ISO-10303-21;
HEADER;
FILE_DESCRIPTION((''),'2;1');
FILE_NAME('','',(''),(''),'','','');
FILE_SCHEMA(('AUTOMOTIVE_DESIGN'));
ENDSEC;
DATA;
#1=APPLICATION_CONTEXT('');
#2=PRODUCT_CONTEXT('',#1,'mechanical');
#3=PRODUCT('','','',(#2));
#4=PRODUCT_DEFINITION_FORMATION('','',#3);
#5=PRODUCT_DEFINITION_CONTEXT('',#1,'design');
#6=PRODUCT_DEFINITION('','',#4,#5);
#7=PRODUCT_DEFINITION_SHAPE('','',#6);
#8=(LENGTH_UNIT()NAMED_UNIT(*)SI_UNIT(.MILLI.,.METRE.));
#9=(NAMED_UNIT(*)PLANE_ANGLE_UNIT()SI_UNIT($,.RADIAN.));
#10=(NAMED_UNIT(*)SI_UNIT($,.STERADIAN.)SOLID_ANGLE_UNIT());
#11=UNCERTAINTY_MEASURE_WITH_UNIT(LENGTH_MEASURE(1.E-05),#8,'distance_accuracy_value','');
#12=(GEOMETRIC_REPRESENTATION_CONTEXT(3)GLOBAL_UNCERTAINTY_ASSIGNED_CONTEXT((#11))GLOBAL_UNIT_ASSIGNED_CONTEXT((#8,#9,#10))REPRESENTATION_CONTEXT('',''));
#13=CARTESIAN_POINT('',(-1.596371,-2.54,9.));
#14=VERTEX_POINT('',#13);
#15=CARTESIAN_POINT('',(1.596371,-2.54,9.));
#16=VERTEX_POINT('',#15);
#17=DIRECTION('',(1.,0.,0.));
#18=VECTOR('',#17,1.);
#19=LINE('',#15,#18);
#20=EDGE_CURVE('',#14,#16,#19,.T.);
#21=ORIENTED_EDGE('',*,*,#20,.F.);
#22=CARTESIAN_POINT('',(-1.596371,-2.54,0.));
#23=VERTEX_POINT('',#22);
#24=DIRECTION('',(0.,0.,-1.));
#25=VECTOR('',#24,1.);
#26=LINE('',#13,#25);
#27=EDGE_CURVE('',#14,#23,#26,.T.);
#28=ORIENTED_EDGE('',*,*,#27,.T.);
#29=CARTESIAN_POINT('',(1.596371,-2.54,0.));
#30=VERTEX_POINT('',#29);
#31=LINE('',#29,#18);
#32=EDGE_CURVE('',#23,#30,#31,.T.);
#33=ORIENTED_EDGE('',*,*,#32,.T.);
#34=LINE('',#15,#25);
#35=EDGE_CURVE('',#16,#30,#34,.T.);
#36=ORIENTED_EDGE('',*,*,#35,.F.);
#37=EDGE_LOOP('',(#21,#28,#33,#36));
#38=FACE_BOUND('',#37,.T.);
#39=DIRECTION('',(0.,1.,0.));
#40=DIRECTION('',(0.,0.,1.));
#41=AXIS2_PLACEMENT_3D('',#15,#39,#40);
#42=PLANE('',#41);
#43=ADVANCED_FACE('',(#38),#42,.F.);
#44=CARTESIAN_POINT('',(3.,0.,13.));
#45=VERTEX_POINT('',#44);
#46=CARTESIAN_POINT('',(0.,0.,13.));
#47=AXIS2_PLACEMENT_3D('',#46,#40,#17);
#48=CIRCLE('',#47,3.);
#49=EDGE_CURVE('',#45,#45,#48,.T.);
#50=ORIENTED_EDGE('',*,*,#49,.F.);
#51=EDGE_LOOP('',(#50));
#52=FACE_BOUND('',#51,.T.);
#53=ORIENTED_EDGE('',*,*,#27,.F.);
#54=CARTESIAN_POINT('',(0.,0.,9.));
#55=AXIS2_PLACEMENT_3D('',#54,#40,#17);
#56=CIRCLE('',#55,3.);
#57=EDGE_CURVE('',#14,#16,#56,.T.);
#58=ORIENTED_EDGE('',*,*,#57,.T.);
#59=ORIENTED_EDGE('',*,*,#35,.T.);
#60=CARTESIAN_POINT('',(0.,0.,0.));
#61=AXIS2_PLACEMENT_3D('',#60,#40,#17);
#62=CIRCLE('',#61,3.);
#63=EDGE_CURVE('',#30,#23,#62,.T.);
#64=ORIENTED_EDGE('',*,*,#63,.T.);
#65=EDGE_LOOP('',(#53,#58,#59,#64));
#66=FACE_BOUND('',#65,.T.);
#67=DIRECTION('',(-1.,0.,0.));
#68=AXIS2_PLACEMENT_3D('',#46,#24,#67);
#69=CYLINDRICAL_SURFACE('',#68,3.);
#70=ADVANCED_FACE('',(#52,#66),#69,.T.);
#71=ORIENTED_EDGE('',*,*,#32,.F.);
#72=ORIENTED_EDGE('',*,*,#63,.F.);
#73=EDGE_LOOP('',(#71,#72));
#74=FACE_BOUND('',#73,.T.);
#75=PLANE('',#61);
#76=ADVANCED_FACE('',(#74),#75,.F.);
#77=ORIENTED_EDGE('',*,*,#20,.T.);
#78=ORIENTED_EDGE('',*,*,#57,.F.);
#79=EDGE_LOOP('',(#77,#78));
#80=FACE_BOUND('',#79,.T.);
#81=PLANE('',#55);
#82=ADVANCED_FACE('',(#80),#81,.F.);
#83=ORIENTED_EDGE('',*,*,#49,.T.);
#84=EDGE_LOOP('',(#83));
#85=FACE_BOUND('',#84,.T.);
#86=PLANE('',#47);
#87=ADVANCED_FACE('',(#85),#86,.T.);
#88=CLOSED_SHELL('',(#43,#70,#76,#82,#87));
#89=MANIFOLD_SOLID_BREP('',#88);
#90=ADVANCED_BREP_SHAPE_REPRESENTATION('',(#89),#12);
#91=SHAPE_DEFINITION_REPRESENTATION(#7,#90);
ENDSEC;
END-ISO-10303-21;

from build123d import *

# Parameters (mm, degrees)
SZKIC1_R                        = 3
DODANIE_WYCI_GNI_CIE1_DEPTH     = 13
SZKIC2_R                        = 3.83
DODANIE_WYCI_GNI_CIE2_DEPTH     = 9
GWINT1_PITCH                    = 1.25
SZKIC6_R                        = 6
DODANIE_WYCI_GNI_CIE3_DEPTH     = 2
SZKIC8_W                        = 15.88
SZKIC8_H                        = 21.21
DODANIE_WYCI_GNI_CIE4_DEPTH     = 14
ZAOKR_GLENIE1_R                 = 2
WYTNIJ_WYCI_GNI_CIE1_DEPTH      = 9
DODANIE_WYCI_GNI_CIE6_OUTLINE_W = 1
DODANIE_WYCI_GNI_CIE6_OUTLINE_H = 2
DODANIE_WYCI_GNI_CIE6_ANGLE     = 180
DODANIE_WYCI_GNI_CIE7_START     = 24
DODANIE_WYCI_GNI_CIE7_DEPTH     = 1
WYTNIJ_WYCI_GNI_CIE2_START      = -13
SZKIC11_R                       = 50
WYTNIJ_WYCI_GNI_CIE2_DEPTH      = 28.69554901


# Read off the part's stored shape, not the designer's step: Dodanie-wyciągnięcie6
with BuildPart() as part:
    # Szkic1 → Dodanie-wyciągnięcie1 (new body)
    with BuildSketch(Plane.XY):
        with Locations(Location((0, 0, 0), (0, 0, 180))):
            Circle(SZKIC1_R)
    extrude(amount=DODANIE_WYCI_GNI_CIE1_DEPTH)

    # Szkic2 → Dodanie-wyciągnięcie2 (add)
    with BuildSketch(Plane.XY.offset(13)):
        Circle(SZKIC2_R)
    extrude(amount=DODANIE_WYCI_GNI_CIE2_DEPTH)

    # Gwint1: the profile of Profil gwintu1 profile screwed along a right-hand helix of 8 turns, 8 arcs to a turn; built about Z, then put on its axis
    gwint1_z = Axis((0, 0, 0), (0, 0, 1))
    gwint1_corners = [(3.8297, 0, -0.000173205), (4.506582344, 0, 0.390624998), (4.506582344, 0, 0.546874998), (3.8297, 0, 0.937673202)]
    with BuildLine(mode=Mode.PRIVATE) as gwint1_profile:
        Line(gwint1_corners[0], gwint1_corners[1])
        Line(gwint1_corners[1], gwint1_corners[2])
        Line(gwint1_corners[2], gwint1_corners[3])
        Line(gwint1_corners[3], gwint1_corners[0])
    gwint1_cap = Face(gwint1_profile.wire())
    gwint1_turn_angles = [0, 22.5, 45, 67.5, 90, 112.5, 135, 157.5, 180, 202.5, 225, 247.5, 270, 292.5, 315, 337.5, 360]
    gwint1_turn_weights = [1, 0.9238795325112867, 1, 0.9238795325112867, 1, 0.9238795325112867, 1, 0.9238795325112867, 1, 0.9238795325112867, 1, 0.9238795325112867, 1, 0.9238795325112867, 1, 0.9238795325112867, 1]
    gwint1_turn_rails = [Edge.make_bspline([Vector(p[0], p[1], 0).rotate(gwint1_z, gwint1_turn_angles[k]) / gwint1_turn_weights[k] + Vector(0, 0, p[2] + GWINT1_PITCH * gwint1_turn_angles[k] / 360) for k in range(17)], [0, 0, 0, 1, 1, 2, 2, 3, 3, 4, 4, 5, 5, 6, 6, 7, 7, 8, 8, 8], 2, gwint1_turn_weights) for p in gwint1_corners]
    gwint1_turn_sides = [Face.make_surface_from_curves(gwint1_turn_rails[p[0]], gwint1_turn_rails[p[1]]) for p in [(0, 1), (1, 2), (2, 3), (3, 0)]]
    gwint1 = Plane(origin=(0, 0, 13), x_dir=(1, 0, 0), z_dir=(0, 0, 1)) * Solid(Shell([*[p.moved(Location((0, 0, GWINT1_PITCH * i))) for i in range(8) for p in gwint1_turn_sides], gwint1_cap, gwint1_cap.rotate(gwint1_z, 2880).moved(Location((0, 0, GWINT1_PITCH * 2880 / 360)))]))
    add(gwint1)

    # Szkic6 → Dodanie-wyciągnięcie3 (add)
    with BuildSketch(Plane.XY.offset(22)):
        Circle(SZKIC6_R)
    extrude(amount=DODANIE_WYCI_GNI_CIE3_DEPTH)

    # Szkic8 → Dodanie-wyciągnięcie4 (add)
    with BuildSketch(Plane.XY.offset(24)):
        with Locations((0, -1.605)):
            Rectangle(SZKIC8_W, SZKIC8_H)
    extrude(amount=DODANIE_WYCI_GNI_CIE4_DEPTH)

    # Zaokrąglenie1
    zaokr_glenie1_edges = [part.edges().sort_by_distance(p)[0] for p in [
        (-7.94, -1.605, 24),
        (-7.94, 9, 31),
        (0, -12.21, 24),
        (-7.94, -12.21, 31),
        (7.94, -1.605, 24),
        (7.94, -12.21, 31),
        (0, 9, 24),
        (7.94, 9, 31),
    ]]
    fillet(zaokr_glenie1_edges, radius=ZAOKR_GLENIE1_R)

    # Szkic9 → Wytnij-wyciągnięcie1 (cut)
    with BuildSketch(Plane(origin=(0, 0, 0), x_dir=(-1, 0, 0), z_dir=(0, 0, -1))):
        Polygon((-1.596370884, -2.54), (1.596370884, -2.54), (8.034501067, -6.687500384), (-7.848069709, -6.190255995), align=None)
    extrude(amount=-WYTNIJ_WYCI_GNI_CIE1_DEPTH, mode=Mode.SUBTRACT)

    # Dodanie-wyciągnięcie6 outline → Dodanie-wyciągnięcie6 (revolve)
    with BuildSketch(Plane.YZ.offset(7.94)):
        with Locations((0.5, 25)):
            Rectangle(DODANIE_WYCI_GNI_CIE6_OUTLINE_W, DODANIE_WYCI_GNI_CIE6_OUTLINE_H)
    revolve(axis=Axis((7.94, 0, 0), (0, 0, 1)), revolution_arc=DODANIE_WYCI_GNI_CIE6_ANGLE)

    # Szkic10<2> → Dodanie-wyciągnięcie7 (add)
    with BuildSketch(Plane.XY.offset(DODANIE_WYCI_GNI_CIE7_START)):
        with BuildLine():
            Line((7.94, 0), (7.94, 1))
            ThreePointArc((7.94, 1), (6.94, 0), (7.94, -1))
            Line((7.94, -1), (7.94, 0))
        make_face()
    extrude(amount=-DODANIE_WYCI_GNI_CIE7_DEPTH)

    # Szkic11 → Wytnij-wyciągnięcie2 (cut, through all)
    with BuildSketch(Plane(origin=(0, 0, 0), x_dir=(-1, 0, 0), z_dir=(0, 0, -1)).offset(WYTNIJ_WYCI_GNI_CIE2_START)):
        Circle(SZKIC11_R)
    extrude(amount=-WYTNIJ_WYCI_GNI_CIE2_DEPTH, mode=Mode.SUBTRACT)


with BuildPart() as wytnij_wyci_gni_cie2_kept_piece:
    # of the separate pieces the step leaves, the one the design keeps (wytnij_wyci_gni_cie2_pieces_kept)
    add(part.part.solids().sort_by_distance((-3, 0, 0))[0])


solid = wytnij_wyci_gni_cie2_kept_piece.part
